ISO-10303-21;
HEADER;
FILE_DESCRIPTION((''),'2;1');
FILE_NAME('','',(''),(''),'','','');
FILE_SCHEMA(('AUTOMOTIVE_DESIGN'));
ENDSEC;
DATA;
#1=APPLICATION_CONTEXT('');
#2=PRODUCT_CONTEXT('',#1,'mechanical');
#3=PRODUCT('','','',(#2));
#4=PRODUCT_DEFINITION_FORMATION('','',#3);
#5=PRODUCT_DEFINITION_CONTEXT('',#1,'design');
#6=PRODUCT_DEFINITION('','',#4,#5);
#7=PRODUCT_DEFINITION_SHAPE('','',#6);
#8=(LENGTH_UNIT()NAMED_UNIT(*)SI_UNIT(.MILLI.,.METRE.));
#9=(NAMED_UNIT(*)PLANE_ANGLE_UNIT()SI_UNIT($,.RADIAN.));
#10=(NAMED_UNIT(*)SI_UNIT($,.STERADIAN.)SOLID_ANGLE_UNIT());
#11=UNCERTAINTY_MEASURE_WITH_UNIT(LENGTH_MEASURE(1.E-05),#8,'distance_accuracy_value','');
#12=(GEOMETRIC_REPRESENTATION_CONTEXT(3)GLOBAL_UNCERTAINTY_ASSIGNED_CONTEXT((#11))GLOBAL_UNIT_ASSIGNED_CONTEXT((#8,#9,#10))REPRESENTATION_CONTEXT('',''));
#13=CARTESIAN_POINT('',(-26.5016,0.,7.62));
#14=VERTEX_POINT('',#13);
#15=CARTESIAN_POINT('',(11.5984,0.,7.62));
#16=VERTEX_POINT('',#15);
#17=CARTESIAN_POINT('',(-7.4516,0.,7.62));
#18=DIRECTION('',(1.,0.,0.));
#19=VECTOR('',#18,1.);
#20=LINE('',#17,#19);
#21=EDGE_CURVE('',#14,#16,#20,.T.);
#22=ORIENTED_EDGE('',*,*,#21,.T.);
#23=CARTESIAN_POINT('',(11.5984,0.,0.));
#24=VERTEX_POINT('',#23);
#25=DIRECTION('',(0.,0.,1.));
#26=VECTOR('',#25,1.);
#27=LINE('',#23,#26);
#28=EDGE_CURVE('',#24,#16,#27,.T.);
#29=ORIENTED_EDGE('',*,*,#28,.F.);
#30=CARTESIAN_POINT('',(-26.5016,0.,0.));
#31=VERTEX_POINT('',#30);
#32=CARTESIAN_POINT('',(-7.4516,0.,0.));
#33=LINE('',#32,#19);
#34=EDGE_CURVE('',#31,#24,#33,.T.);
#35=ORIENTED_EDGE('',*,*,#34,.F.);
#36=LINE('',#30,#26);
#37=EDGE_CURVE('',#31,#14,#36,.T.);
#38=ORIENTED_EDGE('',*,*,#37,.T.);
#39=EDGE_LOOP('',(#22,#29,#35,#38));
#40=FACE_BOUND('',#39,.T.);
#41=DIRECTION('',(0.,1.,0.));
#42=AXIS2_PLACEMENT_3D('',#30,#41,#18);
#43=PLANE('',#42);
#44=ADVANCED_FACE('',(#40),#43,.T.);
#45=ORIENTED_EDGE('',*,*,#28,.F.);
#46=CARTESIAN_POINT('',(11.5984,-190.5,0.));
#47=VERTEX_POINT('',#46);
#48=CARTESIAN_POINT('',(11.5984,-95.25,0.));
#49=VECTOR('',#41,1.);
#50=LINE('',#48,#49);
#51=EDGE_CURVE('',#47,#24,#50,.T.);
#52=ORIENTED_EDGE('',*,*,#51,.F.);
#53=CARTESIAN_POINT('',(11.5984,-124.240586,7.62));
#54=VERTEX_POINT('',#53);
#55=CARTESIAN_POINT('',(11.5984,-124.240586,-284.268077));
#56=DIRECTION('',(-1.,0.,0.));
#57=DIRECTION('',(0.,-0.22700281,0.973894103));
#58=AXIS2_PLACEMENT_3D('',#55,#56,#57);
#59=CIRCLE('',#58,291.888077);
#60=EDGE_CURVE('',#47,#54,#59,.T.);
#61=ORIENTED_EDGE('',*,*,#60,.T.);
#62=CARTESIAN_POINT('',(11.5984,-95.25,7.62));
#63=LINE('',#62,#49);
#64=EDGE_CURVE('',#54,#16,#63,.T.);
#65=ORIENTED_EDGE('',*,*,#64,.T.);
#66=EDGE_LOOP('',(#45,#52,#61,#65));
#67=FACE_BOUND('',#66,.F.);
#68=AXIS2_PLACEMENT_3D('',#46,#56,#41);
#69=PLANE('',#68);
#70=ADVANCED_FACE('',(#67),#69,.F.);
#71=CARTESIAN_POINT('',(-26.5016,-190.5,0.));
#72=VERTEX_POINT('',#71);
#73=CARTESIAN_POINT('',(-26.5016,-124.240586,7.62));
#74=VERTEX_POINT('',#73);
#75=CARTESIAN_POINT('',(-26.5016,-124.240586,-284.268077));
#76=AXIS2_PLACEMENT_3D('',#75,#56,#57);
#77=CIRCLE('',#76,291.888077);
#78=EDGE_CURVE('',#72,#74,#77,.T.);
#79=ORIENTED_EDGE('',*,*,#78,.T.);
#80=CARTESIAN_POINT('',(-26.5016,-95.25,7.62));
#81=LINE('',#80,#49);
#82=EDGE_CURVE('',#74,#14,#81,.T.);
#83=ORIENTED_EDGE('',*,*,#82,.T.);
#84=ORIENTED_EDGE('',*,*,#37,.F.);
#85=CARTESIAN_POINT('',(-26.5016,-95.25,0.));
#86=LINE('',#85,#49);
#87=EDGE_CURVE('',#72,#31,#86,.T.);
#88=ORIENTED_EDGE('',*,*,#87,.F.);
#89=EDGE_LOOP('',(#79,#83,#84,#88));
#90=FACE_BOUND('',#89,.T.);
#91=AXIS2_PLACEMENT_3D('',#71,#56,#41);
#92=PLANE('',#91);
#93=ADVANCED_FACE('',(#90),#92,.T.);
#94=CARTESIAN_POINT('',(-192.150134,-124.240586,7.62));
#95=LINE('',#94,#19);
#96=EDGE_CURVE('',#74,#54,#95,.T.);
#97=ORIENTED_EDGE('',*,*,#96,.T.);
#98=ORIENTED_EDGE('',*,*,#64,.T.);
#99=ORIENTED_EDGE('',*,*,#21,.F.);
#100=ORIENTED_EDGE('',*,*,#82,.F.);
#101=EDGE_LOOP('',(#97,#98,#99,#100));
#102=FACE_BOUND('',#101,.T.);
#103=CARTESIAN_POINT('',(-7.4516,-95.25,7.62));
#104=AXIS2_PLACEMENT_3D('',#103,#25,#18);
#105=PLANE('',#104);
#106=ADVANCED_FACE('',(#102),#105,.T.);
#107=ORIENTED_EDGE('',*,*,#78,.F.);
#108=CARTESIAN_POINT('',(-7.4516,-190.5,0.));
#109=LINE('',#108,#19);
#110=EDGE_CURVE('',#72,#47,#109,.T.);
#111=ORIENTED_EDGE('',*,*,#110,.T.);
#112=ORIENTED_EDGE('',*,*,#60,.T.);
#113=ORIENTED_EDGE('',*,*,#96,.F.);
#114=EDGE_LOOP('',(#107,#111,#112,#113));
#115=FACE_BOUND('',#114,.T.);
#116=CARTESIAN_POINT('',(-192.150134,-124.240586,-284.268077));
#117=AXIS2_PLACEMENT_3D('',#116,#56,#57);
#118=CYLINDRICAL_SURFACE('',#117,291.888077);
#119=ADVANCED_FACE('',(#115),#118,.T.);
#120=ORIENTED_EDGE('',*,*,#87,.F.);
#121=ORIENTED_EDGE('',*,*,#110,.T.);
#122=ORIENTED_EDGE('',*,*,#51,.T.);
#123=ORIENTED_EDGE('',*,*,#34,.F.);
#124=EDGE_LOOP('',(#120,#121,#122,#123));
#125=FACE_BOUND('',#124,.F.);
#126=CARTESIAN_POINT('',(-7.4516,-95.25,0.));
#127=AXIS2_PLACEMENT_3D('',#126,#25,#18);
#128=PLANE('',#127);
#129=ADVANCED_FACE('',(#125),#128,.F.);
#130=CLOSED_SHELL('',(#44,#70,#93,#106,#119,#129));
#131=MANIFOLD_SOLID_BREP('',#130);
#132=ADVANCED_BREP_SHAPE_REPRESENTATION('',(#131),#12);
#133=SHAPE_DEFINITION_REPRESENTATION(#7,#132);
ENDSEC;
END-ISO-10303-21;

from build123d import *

# Parameters (mm, degrees)
F0_W        = 38.1
F0_H        = 190.5
F1_DEPTH    = 7.62
F2_T1_DEPTH = 369.3970678465


# Not quite as in the source:
# - a fillet or chamfer that OpenCascade refuses, or shapes differently, is made with other operations: its cross-section is extruded or revolved along the edge and cut away or added


with BuildPart() as f1:
    # F0 (on Top) → F1 (new body)
    with BuildSketch(Plane.XY):
        with Locations((-7.4515999526, -95.25)):
            Rectangle(F0_W, F0_H)
    extrude(amount=F1_DEPTH)

    # F2: fillet of radius 291.8880765452 on 1 edges, made by hand

    # F2_s2 → F2_t1 (cut)
    with BuildSketch(Plane.YZ.offset(-192.1501338759)):
        with BuildLine():
            ThreePointArc((-190.5, 0), (-157.5886534157, 5.7087426277), (-124.2405864307, 7.62))
            Line((-124.2405864307, 7.62), (-124.2405864307, 13.4577615309))
            Line((-124.2405864307, 13.4577615309), (-190.5, 13.4577615309))
            Line((-190.5, 13.4577615309), (-196.3377615309, 7.62))
            ThreePointArc((-196.3377615309, 7.62), (-196.3377615309, 3.81), (-191.8251882714, 5.6853615309))
            Line((-191.8251882714, 5.6853615309), (-190.5, 0))
        make_face()
    extrude(amount=F2_T1_DEPTH, mode=Mode.SUBTRACT)


solid = f1.part
